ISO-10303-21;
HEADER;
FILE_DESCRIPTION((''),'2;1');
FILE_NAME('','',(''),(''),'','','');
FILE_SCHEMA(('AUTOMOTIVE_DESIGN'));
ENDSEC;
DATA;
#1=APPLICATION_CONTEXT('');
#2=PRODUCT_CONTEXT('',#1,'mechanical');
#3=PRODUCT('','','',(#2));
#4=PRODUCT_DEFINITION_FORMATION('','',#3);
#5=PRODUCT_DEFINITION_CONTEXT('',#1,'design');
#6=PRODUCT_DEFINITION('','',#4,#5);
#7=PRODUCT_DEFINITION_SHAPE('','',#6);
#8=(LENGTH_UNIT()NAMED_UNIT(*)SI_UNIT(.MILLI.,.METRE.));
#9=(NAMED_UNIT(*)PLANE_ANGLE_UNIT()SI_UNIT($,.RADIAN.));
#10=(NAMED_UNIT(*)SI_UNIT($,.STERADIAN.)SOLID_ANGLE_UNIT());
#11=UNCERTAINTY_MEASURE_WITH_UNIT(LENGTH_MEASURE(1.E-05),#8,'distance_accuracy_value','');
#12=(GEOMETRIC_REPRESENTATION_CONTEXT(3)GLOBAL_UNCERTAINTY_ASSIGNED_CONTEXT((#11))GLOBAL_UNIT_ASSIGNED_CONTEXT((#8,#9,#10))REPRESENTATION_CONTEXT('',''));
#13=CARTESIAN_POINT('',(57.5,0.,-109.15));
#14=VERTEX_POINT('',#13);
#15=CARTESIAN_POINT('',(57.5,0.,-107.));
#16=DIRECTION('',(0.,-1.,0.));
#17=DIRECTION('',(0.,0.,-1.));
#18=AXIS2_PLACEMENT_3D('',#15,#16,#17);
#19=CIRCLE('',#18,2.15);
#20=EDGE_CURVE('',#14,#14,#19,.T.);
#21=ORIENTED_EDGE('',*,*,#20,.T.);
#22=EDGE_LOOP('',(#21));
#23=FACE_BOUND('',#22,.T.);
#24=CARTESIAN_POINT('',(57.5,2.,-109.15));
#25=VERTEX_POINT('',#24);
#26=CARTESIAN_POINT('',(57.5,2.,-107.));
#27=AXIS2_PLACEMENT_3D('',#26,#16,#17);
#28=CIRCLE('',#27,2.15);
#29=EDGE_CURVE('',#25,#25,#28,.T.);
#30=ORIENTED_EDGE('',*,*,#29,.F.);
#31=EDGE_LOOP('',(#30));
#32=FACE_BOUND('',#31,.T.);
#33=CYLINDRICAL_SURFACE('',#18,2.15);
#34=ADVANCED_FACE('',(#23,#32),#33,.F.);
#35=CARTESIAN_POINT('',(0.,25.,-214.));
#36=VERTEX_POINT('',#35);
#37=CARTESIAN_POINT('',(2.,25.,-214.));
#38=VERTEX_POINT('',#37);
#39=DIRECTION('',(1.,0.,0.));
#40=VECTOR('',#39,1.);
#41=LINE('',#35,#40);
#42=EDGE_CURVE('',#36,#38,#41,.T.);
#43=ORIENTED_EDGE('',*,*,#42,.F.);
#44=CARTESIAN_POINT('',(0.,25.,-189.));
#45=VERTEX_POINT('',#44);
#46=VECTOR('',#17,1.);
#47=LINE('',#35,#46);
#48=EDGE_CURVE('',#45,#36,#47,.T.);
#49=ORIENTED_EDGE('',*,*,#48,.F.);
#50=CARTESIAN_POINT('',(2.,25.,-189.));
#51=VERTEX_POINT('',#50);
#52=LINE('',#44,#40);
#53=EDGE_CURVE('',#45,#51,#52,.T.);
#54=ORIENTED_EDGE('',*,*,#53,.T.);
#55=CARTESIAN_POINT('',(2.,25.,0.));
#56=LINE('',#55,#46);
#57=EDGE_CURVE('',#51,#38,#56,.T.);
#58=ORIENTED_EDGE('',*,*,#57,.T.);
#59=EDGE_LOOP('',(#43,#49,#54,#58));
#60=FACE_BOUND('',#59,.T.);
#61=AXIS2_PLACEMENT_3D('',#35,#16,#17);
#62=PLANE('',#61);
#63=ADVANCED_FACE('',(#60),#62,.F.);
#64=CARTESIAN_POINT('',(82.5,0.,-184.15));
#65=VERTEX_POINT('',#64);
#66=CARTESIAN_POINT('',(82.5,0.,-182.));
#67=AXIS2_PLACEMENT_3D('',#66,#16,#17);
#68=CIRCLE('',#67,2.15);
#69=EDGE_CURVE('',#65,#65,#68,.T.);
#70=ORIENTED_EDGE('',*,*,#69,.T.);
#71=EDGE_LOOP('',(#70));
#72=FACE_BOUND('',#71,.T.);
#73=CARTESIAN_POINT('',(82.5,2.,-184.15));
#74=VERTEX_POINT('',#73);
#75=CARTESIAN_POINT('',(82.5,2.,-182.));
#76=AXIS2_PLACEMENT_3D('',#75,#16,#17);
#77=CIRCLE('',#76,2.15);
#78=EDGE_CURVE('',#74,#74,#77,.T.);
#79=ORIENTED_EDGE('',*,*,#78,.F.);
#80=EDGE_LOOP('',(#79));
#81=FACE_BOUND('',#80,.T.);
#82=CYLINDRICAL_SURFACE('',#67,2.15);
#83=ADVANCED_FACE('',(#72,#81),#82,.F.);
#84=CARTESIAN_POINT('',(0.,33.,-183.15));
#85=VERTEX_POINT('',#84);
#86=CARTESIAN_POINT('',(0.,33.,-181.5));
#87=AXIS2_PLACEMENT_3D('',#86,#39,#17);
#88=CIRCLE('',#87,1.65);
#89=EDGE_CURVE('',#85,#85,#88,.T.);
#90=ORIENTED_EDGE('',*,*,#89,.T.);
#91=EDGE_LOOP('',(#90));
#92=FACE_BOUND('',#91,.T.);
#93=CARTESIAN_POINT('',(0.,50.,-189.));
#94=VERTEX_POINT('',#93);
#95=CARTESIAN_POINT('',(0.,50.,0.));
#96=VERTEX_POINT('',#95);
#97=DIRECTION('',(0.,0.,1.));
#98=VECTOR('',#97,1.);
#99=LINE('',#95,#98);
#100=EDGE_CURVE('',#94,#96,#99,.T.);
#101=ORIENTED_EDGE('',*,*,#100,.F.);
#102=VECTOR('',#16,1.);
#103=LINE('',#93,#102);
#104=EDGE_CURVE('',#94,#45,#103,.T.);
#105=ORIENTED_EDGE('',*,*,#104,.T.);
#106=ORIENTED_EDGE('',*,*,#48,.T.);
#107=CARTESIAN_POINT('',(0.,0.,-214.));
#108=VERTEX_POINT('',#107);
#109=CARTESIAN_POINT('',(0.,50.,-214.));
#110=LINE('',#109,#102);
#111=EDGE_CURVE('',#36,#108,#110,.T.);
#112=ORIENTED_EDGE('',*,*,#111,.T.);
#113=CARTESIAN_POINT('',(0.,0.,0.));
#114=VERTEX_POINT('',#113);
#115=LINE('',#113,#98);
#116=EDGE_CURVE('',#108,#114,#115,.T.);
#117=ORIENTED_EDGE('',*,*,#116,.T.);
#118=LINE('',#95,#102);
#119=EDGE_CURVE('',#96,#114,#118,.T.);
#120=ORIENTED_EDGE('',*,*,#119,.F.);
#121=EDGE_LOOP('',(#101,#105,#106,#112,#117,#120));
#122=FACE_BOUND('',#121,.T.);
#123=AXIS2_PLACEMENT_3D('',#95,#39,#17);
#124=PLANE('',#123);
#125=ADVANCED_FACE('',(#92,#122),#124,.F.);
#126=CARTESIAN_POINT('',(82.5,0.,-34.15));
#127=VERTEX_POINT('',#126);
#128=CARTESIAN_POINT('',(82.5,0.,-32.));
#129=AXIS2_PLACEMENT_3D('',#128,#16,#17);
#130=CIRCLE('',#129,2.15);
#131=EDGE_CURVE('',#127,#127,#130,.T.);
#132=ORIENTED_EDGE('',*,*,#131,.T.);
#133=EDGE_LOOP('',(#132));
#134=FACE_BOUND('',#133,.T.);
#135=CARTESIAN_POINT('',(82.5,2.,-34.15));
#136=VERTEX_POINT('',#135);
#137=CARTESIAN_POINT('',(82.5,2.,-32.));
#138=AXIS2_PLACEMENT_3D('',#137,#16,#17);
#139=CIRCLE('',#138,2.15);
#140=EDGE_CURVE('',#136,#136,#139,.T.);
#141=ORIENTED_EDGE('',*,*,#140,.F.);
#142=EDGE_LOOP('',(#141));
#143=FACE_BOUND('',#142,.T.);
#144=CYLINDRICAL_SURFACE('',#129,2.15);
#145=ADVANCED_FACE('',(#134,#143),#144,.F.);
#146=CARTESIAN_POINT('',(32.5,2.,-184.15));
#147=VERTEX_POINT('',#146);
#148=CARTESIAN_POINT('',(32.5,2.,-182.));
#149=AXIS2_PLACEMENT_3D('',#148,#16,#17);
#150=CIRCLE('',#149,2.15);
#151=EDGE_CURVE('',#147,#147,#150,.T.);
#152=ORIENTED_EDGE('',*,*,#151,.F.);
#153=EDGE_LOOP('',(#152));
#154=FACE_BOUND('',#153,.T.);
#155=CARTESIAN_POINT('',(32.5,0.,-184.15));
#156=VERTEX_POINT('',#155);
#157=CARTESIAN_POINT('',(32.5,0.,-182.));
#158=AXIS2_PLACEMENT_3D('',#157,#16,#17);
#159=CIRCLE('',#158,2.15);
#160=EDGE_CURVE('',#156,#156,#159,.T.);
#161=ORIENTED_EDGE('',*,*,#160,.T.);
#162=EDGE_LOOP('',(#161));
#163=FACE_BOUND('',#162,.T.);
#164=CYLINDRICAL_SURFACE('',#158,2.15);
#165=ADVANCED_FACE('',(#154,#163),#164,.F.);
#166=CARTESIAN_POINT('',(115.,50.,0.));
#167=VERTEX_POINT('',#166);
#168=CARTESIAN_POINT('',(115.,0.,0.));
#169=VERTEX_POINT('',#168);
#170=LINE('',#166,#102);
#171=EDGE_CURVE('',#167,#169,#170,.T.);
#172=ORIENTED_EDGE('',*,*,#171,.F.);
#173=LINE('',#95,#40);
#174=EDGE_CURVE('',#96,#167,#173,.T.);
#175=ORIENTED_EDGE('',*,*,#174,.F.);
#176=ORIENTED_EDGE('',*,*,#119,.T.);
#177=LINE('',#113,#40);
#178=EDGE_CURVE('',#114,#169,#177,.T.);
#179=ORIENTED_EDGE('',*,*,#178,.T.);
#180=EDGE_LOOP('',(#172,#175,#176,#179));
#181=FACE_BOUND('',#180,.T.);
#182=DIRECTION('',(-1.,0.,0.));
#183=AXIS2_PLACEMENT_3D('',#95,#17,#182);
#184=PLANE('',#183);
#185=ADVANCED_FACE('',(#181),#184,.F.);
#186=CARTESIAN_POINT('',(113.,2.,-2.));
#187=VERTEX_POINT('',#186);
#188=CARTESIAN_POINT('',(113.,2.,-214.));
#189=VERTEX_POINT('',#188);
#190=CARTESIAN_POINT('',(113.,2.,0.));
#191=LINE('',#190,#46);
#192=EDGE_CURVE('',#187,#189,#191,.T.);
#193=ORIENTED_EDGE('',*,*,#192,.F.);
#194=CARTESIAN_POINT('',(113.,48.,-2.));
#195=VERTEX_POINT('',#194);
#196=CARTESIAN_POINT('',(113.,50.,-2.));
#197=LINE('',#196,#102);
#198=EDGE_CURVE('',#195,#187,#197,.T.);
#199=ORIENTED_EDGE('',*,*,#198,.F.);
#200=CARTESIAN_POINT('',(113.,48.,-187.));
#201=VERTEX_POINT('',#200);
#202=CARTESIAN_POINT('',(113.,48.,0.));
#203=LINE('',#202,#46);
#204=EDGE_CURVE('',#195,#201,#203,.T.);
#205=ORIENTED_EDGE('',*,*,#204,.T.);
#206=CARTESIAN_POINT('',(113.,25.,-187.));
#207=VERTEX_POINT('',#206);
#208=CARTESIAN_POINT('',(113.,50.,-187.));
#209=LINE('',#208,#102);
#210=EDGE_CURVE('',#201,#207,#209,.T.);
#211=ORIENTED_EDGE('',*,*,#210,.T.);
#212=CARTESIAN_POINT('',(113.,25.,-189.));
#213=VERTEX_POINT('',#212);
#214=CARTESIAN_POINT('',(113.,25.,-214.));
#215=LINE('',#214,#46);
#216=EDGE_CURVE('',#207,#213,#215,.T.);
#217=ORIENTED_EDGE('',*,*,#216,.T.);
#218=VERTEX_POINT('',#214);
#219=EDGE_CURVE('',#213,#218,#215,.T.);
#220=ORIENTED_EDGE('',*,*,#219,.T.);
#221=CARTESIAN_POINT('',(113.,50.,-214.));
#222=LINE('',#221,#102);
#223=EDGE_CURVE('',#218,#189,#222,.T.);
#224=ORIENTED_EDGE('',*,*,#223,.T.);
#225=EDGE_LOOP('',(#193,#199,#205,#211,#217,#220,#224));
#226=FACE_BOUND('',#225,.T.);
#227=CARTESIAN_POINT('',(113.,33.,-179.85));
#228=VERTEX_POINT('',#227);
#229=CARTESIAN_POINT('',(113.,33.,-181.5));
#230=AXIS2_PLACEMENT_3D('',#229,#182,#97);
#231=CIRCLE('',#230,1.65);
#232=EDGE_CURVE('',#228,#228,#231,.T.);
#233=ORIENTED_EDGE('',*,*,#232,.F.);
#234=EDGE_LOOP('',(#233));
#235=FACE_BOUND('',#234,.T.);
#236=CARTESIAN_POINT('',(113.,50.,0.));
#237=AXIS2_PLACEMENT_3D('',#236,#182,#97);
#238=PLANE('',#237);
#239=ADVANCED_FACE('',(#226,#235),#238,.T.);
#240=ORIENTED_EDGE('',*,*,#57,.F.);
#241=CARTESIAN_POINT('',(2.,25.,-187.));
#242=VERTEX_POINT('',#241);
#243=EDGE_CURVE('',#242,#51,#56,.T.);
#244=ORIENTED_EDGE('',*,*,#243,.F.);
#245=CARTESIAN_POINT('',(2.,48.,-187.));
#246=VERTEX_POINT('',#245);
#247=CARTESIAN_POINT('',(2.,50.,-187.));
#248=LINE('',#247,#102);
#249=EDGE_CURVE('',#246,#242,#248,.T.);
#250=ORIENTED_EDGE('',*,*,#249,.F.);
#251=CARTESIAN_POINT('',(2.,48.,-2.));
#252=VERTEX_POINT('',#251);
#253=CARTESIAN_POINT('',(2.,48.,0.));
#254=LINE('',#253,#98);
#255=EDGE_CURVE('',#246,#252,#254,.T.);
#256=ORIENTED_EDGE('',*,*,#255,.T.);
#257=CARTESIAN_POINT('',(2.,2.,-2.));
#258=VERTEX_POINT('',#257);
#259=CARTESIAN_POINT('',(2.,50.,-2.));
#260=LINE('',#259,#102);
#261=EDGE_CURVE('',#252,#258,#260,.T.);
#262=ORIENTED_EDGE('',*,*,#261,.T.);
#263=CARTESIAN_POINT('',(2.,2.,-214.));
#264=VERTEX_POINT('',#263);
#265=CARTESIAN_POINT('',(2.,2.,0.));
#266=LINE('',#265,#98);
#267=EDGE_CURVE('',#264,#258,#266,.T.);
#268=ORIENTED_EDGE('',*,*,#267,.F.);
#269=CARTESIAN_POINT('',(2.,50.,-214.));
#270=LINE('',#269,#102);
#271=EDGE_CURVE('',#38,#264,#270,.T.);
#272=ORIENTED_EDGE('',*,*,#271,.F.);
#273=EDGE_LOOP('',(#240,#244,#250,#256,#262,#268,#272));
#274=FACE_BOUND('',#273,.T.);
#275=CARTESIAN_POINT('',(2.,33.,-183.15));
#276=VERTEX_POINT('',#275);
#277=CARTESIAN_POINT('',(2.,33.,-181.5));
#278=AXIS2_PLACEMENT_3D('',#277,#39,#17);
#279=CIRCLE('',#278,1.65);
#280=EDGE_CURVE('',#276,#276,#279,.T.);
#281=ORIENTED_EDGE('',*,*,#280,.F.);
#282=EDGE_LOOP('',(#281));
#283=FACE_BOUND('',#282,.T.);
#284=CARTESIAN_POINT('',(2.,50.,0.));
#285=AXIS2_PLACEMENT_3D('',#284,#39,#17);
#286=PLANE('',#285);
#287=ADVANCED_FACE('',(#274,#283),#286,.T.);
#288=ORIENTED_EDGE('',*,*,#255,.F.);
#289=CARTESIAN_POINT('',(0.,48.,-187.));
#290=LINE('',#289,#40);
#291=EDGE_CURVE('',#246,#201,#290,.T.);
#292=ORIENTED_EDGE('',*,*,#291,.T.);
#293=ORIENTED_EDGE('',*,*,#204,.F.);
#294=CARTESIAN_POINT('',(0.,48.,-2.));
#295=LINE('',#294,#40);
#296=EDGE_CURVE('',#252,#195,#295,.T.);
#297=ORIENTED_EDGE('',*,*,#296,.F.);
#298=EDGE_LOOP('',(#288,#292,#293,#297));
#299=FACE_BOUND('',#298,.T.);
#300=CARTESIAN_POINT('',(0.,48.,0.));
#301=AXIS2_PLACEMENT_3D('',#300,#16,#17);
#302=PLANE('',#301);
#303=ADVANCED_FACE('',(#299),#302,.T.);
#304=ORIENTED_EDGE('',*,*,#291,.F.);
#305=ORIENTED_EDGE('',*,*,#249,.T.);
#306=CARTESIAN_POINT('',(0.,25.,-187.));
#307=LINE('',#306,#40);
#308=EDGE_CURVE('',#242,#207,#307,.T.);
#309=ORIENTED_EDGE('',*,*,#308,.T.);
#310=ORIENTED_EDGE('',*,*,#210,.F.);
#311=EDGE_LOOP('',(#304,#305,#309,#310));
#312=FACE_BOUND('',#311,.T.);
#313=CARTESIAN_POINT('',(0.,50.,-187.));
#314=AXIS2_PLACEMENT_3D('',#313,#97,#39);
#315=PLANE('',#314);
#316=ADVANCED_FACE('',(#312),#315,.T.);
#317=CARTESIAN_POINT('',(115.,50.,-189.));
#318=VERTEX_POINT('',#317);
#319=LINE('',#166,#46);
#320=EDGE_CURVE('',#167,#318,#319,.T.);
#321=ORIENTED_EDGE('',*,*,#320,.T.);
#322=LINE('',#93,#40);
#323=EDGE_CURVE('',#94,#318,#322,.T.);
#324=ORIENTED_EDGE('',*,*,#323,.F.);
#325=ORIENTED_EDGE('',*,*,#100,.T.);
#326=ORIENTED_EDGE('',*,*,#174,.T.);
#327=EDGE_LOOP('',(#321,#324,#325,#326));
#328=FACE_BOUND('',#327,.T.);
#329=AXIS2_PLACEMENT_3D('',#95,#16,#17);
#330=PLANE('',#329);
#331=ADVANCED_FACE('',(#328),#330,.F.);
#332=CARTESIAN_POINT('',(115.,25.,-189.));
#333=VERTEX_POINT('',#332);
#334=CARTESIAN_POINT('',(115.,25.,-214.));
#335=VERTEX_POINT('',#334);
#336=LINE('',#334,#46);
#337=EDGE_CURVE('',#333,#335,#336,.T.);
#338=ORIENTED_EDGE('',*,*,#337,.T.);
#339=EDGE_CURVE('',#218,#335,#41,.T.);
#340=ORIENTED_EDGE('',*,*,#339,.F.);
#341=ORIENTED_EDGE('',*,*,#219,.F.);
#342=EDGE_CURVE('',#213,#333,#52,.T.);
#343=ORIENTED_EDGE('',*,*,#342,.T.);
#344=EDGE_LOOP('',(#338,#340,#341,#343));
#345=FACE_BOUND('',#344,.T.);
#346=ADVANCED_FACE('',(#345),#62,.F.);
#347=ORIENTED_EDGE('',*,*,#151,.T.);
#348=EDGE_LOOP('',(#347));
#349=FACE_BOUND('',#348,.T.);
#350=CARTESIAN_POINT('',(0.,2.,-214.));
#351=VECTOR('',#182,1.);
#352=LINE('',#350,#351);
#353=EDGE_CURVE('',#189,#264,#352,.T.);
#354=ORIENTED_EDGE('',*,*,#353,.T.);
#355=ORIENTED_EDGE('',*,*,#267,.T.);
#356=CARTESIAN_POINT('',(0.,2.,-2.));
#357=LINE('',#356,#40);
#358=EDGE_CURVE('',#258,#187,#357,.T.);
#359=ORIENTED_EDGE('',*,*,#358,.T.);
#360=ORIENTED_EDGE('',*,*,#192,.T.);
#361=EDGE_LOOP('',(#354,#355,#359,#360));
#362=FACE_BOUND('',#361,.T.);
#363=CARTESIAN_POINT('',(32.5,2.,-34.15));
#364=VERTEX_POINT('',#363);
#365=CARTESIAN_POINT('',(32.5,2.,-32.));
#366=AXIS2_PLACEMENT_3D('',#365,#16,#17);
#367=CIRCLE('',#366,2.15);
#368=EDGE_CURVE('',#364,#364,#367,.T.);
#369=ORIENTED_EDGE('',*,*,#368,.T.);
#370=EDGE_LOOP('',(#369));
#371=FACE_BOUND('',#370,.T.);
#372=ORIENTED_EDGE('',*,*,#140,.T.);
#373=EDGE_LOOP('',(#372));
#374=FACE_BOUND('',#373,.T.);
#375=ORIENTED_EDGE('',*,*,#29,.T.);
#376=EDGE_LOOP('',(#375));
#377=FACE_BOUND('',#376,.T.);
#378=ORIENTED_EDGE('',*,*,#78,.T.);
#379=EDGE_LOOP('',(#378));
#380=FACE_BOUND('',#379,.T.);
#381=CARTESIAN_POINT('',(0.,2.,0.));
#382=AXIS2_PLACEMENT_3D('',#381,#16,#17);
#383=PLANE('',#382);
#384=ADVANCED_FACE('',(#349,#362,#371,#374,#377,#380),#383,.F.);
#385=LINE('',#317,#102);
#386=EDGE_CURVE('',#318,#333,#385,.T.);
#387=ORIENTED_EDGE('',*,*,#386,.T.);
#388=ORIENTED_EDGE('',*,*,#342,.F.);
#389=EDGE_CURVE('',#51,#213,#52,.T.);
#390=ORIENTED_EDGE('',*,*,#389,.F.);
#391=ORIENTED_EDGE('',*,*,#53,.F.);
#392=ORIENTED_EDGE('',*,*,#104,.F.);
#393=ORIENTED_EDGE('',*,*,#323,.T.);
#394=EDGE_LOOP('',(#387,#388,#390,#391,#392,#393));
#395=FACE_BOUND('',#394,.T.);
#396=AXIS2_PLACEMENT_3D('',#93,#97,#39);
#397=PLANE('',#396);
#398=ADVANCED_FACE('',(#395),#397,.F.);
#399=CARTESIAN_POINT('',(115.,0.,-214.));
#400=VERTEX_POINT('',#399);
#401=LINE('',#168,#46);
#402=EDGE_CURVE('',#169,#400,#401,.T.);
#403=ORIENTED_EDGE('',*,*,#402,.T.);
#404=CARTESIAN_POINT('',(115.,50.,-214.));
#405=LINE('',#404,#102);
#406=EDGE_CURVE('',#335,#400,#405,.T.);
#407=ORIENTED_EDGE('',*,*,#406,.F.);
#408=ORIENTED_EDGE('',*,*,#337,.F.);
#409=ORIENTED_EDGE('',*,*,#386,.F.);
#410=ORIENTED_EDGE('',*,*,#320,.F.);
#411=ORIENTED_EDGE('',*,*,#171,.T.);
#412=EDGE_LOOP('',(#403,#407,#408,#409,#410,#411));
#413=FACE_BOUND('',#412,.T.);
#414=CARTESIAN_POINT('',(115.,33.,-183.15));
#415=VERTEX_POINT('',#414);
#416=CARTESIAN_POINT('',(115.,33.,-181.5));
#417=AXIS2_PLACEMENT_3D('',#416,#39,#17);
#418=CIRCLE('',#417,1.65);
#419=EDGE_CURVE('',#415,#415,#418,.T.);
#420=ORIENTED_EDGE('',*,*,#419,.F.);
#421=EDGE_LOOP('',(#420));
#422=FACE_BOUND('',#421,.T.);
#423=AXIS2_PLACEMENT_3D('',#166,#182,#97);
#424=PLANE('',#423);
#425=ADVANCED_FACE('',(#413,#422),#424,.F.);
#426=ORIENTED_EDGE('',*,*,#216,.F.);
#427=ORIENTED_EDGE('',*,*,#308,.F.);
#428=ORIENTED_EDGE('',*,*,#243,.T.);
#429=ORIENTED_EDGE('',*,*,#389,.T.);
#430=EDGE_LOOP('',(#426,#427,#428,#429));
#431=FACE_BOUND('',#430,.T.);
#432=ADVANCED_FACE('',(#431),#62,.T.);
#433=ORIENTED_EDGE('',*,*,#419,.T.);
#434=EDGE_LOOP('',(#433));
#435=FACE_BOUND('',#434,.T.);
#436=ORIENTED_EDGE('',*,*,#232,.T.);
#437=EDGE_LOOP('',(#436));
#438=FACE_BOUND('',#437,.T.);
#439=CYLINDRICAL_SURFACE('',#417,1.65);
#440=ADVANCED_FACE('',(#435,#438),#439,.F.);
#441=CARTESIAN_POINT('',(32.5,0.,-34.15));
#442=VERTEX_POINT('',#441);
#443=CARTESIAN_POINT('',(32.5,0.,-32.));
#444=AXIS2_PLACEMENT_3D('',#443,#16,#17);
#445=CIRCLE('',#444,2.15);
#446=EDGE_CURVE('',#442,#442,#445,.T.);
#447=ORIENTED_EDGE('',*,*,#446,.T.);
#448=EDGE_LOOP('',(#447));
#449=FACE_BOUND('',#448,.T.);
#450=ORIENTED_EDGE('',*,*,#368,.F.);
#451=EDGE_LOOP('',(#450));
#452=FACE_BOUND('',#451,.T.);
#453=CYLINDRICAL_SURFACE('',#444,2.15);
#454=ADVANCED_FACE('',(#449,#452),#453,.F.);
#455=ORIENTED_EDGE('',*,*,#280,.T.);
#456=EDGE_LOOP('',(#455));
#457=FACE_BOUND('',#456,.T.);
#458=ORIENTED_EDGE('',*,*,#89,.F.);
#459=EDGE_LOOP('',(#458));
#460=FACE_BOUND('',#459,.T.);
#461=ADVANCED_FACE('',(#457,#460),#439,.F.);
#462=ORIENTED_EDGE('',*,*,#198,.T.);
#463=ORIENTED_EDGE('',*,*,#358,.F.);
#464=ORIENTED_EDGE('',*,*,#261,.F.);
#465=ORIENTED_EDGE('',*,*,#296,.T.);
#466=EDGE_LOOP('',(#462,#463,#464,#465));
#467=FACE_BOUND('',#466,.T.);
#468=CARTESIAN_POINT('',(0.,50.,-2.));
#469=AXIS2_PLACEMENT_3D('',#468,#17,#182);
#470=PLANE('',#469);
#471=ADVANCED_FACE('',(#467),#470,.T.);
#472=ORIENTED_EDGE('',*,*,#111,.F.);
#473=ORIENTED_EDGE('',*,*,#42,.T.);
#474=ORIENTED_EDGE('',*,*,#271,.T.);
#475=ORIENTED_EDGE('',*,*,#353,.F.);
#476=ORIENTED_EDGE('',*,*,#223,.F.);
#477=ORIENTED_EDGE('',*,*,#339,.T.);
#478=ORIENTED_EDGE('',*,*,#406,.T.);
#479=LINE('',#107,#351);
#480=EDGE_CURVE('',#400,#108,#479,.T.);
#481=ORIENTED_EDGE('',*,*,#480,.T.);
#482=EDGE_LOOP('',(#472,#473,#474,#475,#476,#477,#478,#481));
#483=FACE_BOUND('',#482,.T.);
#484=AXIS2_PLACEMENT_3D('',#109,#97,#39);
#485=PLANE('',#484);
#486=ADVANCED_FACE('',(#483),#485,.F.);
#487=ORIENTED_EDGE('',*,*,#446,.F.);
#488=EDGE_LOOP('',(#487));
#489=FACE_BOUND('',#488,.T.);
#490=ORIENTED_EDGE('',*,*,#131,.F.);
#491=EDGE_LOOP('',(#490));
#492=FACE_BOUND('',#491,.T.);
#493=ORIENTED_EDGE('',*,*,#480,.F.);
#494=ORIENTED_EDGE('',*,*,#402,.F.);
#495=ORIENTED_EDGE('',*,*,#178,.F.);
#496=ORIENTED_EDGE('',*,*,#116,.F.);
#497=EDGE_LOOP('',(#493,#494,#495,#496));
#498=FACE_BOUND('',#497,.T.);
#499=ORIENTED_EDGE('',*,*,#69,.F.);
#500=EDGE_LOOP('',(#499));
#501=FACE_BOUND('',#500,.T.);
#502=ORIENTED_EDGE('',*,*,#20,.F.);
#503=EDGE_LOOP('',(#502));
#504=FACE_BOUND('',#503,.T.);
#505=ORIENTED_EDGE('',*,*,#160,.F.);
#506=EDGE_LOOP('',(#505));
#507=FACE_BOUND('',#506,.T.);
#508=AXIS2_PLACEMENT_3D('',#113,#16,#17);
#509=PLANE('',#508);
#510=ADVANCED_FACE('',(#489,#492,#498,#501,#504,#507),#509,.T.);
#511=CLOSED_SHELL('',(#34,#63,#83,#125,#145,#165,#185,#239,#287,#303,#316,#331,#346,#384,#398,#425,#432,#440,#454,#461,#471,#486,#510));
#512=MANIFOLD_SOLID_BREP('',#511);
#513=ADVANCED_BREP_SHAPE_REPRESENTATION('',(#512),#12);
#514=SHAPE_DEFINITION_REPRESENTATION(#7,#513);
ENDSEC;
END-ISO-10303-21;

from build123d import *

# Parameters (mm, degrees)
SKETCH1_W                = 115
SKETCH1_H                = 214
BOSS_EXTRUDE1_DEPTH      = 50
SKETCH4_W                = 25
SKETCH4_H                = 25
CUT_EXTRUDE1_DEPTH       = 249.034271825
SHELL1_START             = 2
SHELL1_OUTLINE_W         = 111
SHELL1_OUTLINE_H         = 185
SHELL1_DEPTH             = 46
SHELL1_2_OUTLINE_W       = 111
SHELL1_2_OUTLINE_H       = 27
SHELL1_2_DEPTH           = 23
M4_CLEARANCE_HOLE1_D     = 4.3
M4_CLEARANCE_HOLE1_DEPTH = 4
M4_CLEARANCE_HOLE1_TIP   = 1.291850331
TAP_DRILL_FOR_M4_TAP1_D  = 3.3


# Read off the part's stored shape, not the designer's step: Shell1
with BuildPart() as part:
    # Sketch1 → Boss-Extrude1 (new body)
    with BuildSketch(Plane(origin=(0, 0, 0), x_dir=(1, 0, 0), z_dir=(0, 1, 0))):
        with Locations((57.5, 107)):
            Rectangle(SKETCH1_W, SKETCH1_H)
    extrude(amount=BOSS_EXTRUDE1_DEPTH)

    # Sketch4 → Cut-Extrude1 (cut, through all)
    with BuildSketch(Plane(origin=(115, 0, 0), x_dir=(0, 0, -1), z_dir=(1, 0, 0))):
        with Locations((201.5, 37.5)):
            Rectangle(SKETCH4_W, SKETCH4_H)
    extrude(amount=-CUT_EXTRUDE1_DEPTH, mode=Mode.SUBTRACT)

    # Shell1 outline → Shell1 (cut)
    with BuildSketch(Plane(origin=(0, 0, 0), x_dir=(1, 0, 0), z_dir=(0, 1, 0)).offset(SHELL1_START)):
        with Locations((57.5, 94.5)):
            Rectangle(SHELL1_OUTLINE_W, SHELL1_OUTLINE_H)
    extrude(amount=SHELL1_DEPTH, mode=Mode.SUBTRACT)

    # Shell1 2 outline → Shell1 2 (cut)
    with BuildSketch(Plane(origin=(0, 0, 0), x_dir=(1, 0, 0), z_dir=(0, 1, 0)).offset(SHELL1_START)):
        with Locations((57.5, 200.5)):
            Rectangle(SHELL1_2_OUTLINE_W, SHELL1_2_OUTLINE_H)
    extrude(amount=SHELL1_2_DEPTH, mode=Mode.SUBTRACT)

    # M4 Clearance Hole1
    with Locations(Plane(origin=(0, 0, 0), x_dir=(-1, 0, 0), z_dir=(0, -1, 0))):
        with Locations((-32.5, 32), (-57.5, 107), (-32.5, 182), (-82.5, 32), (-82.5, 182)):
            Hole(M4_CLEARANCE_HOLE1_D / 2, depth=M4_CLEARANCE_HOLE1_DEPTH)
            with Locations((0, 0, -(M4_CLEARANCE_HOLE1_DEPTH + M4_CLEARANCE_HOLE1_TIP / 2))):  # 118° drill point
                Cone(0, M4_CLEARANCE_HOLE1_D / 2, M4_CLEARANCE_HOLE1_TIP, mode=Mode.SUBTRACT)

    # Tap Drill for M4 Tap1 (through all)
    with Locations(Plane(origin=(115, 0, 0), x_dir=(0, 0, -1), z_dir=(1, 0, 0))):
        with Locations((181.5, 33)):
            Hole(TAP_DRILL_FOR_M4_TAP1_D / 2)


solid = part.part
